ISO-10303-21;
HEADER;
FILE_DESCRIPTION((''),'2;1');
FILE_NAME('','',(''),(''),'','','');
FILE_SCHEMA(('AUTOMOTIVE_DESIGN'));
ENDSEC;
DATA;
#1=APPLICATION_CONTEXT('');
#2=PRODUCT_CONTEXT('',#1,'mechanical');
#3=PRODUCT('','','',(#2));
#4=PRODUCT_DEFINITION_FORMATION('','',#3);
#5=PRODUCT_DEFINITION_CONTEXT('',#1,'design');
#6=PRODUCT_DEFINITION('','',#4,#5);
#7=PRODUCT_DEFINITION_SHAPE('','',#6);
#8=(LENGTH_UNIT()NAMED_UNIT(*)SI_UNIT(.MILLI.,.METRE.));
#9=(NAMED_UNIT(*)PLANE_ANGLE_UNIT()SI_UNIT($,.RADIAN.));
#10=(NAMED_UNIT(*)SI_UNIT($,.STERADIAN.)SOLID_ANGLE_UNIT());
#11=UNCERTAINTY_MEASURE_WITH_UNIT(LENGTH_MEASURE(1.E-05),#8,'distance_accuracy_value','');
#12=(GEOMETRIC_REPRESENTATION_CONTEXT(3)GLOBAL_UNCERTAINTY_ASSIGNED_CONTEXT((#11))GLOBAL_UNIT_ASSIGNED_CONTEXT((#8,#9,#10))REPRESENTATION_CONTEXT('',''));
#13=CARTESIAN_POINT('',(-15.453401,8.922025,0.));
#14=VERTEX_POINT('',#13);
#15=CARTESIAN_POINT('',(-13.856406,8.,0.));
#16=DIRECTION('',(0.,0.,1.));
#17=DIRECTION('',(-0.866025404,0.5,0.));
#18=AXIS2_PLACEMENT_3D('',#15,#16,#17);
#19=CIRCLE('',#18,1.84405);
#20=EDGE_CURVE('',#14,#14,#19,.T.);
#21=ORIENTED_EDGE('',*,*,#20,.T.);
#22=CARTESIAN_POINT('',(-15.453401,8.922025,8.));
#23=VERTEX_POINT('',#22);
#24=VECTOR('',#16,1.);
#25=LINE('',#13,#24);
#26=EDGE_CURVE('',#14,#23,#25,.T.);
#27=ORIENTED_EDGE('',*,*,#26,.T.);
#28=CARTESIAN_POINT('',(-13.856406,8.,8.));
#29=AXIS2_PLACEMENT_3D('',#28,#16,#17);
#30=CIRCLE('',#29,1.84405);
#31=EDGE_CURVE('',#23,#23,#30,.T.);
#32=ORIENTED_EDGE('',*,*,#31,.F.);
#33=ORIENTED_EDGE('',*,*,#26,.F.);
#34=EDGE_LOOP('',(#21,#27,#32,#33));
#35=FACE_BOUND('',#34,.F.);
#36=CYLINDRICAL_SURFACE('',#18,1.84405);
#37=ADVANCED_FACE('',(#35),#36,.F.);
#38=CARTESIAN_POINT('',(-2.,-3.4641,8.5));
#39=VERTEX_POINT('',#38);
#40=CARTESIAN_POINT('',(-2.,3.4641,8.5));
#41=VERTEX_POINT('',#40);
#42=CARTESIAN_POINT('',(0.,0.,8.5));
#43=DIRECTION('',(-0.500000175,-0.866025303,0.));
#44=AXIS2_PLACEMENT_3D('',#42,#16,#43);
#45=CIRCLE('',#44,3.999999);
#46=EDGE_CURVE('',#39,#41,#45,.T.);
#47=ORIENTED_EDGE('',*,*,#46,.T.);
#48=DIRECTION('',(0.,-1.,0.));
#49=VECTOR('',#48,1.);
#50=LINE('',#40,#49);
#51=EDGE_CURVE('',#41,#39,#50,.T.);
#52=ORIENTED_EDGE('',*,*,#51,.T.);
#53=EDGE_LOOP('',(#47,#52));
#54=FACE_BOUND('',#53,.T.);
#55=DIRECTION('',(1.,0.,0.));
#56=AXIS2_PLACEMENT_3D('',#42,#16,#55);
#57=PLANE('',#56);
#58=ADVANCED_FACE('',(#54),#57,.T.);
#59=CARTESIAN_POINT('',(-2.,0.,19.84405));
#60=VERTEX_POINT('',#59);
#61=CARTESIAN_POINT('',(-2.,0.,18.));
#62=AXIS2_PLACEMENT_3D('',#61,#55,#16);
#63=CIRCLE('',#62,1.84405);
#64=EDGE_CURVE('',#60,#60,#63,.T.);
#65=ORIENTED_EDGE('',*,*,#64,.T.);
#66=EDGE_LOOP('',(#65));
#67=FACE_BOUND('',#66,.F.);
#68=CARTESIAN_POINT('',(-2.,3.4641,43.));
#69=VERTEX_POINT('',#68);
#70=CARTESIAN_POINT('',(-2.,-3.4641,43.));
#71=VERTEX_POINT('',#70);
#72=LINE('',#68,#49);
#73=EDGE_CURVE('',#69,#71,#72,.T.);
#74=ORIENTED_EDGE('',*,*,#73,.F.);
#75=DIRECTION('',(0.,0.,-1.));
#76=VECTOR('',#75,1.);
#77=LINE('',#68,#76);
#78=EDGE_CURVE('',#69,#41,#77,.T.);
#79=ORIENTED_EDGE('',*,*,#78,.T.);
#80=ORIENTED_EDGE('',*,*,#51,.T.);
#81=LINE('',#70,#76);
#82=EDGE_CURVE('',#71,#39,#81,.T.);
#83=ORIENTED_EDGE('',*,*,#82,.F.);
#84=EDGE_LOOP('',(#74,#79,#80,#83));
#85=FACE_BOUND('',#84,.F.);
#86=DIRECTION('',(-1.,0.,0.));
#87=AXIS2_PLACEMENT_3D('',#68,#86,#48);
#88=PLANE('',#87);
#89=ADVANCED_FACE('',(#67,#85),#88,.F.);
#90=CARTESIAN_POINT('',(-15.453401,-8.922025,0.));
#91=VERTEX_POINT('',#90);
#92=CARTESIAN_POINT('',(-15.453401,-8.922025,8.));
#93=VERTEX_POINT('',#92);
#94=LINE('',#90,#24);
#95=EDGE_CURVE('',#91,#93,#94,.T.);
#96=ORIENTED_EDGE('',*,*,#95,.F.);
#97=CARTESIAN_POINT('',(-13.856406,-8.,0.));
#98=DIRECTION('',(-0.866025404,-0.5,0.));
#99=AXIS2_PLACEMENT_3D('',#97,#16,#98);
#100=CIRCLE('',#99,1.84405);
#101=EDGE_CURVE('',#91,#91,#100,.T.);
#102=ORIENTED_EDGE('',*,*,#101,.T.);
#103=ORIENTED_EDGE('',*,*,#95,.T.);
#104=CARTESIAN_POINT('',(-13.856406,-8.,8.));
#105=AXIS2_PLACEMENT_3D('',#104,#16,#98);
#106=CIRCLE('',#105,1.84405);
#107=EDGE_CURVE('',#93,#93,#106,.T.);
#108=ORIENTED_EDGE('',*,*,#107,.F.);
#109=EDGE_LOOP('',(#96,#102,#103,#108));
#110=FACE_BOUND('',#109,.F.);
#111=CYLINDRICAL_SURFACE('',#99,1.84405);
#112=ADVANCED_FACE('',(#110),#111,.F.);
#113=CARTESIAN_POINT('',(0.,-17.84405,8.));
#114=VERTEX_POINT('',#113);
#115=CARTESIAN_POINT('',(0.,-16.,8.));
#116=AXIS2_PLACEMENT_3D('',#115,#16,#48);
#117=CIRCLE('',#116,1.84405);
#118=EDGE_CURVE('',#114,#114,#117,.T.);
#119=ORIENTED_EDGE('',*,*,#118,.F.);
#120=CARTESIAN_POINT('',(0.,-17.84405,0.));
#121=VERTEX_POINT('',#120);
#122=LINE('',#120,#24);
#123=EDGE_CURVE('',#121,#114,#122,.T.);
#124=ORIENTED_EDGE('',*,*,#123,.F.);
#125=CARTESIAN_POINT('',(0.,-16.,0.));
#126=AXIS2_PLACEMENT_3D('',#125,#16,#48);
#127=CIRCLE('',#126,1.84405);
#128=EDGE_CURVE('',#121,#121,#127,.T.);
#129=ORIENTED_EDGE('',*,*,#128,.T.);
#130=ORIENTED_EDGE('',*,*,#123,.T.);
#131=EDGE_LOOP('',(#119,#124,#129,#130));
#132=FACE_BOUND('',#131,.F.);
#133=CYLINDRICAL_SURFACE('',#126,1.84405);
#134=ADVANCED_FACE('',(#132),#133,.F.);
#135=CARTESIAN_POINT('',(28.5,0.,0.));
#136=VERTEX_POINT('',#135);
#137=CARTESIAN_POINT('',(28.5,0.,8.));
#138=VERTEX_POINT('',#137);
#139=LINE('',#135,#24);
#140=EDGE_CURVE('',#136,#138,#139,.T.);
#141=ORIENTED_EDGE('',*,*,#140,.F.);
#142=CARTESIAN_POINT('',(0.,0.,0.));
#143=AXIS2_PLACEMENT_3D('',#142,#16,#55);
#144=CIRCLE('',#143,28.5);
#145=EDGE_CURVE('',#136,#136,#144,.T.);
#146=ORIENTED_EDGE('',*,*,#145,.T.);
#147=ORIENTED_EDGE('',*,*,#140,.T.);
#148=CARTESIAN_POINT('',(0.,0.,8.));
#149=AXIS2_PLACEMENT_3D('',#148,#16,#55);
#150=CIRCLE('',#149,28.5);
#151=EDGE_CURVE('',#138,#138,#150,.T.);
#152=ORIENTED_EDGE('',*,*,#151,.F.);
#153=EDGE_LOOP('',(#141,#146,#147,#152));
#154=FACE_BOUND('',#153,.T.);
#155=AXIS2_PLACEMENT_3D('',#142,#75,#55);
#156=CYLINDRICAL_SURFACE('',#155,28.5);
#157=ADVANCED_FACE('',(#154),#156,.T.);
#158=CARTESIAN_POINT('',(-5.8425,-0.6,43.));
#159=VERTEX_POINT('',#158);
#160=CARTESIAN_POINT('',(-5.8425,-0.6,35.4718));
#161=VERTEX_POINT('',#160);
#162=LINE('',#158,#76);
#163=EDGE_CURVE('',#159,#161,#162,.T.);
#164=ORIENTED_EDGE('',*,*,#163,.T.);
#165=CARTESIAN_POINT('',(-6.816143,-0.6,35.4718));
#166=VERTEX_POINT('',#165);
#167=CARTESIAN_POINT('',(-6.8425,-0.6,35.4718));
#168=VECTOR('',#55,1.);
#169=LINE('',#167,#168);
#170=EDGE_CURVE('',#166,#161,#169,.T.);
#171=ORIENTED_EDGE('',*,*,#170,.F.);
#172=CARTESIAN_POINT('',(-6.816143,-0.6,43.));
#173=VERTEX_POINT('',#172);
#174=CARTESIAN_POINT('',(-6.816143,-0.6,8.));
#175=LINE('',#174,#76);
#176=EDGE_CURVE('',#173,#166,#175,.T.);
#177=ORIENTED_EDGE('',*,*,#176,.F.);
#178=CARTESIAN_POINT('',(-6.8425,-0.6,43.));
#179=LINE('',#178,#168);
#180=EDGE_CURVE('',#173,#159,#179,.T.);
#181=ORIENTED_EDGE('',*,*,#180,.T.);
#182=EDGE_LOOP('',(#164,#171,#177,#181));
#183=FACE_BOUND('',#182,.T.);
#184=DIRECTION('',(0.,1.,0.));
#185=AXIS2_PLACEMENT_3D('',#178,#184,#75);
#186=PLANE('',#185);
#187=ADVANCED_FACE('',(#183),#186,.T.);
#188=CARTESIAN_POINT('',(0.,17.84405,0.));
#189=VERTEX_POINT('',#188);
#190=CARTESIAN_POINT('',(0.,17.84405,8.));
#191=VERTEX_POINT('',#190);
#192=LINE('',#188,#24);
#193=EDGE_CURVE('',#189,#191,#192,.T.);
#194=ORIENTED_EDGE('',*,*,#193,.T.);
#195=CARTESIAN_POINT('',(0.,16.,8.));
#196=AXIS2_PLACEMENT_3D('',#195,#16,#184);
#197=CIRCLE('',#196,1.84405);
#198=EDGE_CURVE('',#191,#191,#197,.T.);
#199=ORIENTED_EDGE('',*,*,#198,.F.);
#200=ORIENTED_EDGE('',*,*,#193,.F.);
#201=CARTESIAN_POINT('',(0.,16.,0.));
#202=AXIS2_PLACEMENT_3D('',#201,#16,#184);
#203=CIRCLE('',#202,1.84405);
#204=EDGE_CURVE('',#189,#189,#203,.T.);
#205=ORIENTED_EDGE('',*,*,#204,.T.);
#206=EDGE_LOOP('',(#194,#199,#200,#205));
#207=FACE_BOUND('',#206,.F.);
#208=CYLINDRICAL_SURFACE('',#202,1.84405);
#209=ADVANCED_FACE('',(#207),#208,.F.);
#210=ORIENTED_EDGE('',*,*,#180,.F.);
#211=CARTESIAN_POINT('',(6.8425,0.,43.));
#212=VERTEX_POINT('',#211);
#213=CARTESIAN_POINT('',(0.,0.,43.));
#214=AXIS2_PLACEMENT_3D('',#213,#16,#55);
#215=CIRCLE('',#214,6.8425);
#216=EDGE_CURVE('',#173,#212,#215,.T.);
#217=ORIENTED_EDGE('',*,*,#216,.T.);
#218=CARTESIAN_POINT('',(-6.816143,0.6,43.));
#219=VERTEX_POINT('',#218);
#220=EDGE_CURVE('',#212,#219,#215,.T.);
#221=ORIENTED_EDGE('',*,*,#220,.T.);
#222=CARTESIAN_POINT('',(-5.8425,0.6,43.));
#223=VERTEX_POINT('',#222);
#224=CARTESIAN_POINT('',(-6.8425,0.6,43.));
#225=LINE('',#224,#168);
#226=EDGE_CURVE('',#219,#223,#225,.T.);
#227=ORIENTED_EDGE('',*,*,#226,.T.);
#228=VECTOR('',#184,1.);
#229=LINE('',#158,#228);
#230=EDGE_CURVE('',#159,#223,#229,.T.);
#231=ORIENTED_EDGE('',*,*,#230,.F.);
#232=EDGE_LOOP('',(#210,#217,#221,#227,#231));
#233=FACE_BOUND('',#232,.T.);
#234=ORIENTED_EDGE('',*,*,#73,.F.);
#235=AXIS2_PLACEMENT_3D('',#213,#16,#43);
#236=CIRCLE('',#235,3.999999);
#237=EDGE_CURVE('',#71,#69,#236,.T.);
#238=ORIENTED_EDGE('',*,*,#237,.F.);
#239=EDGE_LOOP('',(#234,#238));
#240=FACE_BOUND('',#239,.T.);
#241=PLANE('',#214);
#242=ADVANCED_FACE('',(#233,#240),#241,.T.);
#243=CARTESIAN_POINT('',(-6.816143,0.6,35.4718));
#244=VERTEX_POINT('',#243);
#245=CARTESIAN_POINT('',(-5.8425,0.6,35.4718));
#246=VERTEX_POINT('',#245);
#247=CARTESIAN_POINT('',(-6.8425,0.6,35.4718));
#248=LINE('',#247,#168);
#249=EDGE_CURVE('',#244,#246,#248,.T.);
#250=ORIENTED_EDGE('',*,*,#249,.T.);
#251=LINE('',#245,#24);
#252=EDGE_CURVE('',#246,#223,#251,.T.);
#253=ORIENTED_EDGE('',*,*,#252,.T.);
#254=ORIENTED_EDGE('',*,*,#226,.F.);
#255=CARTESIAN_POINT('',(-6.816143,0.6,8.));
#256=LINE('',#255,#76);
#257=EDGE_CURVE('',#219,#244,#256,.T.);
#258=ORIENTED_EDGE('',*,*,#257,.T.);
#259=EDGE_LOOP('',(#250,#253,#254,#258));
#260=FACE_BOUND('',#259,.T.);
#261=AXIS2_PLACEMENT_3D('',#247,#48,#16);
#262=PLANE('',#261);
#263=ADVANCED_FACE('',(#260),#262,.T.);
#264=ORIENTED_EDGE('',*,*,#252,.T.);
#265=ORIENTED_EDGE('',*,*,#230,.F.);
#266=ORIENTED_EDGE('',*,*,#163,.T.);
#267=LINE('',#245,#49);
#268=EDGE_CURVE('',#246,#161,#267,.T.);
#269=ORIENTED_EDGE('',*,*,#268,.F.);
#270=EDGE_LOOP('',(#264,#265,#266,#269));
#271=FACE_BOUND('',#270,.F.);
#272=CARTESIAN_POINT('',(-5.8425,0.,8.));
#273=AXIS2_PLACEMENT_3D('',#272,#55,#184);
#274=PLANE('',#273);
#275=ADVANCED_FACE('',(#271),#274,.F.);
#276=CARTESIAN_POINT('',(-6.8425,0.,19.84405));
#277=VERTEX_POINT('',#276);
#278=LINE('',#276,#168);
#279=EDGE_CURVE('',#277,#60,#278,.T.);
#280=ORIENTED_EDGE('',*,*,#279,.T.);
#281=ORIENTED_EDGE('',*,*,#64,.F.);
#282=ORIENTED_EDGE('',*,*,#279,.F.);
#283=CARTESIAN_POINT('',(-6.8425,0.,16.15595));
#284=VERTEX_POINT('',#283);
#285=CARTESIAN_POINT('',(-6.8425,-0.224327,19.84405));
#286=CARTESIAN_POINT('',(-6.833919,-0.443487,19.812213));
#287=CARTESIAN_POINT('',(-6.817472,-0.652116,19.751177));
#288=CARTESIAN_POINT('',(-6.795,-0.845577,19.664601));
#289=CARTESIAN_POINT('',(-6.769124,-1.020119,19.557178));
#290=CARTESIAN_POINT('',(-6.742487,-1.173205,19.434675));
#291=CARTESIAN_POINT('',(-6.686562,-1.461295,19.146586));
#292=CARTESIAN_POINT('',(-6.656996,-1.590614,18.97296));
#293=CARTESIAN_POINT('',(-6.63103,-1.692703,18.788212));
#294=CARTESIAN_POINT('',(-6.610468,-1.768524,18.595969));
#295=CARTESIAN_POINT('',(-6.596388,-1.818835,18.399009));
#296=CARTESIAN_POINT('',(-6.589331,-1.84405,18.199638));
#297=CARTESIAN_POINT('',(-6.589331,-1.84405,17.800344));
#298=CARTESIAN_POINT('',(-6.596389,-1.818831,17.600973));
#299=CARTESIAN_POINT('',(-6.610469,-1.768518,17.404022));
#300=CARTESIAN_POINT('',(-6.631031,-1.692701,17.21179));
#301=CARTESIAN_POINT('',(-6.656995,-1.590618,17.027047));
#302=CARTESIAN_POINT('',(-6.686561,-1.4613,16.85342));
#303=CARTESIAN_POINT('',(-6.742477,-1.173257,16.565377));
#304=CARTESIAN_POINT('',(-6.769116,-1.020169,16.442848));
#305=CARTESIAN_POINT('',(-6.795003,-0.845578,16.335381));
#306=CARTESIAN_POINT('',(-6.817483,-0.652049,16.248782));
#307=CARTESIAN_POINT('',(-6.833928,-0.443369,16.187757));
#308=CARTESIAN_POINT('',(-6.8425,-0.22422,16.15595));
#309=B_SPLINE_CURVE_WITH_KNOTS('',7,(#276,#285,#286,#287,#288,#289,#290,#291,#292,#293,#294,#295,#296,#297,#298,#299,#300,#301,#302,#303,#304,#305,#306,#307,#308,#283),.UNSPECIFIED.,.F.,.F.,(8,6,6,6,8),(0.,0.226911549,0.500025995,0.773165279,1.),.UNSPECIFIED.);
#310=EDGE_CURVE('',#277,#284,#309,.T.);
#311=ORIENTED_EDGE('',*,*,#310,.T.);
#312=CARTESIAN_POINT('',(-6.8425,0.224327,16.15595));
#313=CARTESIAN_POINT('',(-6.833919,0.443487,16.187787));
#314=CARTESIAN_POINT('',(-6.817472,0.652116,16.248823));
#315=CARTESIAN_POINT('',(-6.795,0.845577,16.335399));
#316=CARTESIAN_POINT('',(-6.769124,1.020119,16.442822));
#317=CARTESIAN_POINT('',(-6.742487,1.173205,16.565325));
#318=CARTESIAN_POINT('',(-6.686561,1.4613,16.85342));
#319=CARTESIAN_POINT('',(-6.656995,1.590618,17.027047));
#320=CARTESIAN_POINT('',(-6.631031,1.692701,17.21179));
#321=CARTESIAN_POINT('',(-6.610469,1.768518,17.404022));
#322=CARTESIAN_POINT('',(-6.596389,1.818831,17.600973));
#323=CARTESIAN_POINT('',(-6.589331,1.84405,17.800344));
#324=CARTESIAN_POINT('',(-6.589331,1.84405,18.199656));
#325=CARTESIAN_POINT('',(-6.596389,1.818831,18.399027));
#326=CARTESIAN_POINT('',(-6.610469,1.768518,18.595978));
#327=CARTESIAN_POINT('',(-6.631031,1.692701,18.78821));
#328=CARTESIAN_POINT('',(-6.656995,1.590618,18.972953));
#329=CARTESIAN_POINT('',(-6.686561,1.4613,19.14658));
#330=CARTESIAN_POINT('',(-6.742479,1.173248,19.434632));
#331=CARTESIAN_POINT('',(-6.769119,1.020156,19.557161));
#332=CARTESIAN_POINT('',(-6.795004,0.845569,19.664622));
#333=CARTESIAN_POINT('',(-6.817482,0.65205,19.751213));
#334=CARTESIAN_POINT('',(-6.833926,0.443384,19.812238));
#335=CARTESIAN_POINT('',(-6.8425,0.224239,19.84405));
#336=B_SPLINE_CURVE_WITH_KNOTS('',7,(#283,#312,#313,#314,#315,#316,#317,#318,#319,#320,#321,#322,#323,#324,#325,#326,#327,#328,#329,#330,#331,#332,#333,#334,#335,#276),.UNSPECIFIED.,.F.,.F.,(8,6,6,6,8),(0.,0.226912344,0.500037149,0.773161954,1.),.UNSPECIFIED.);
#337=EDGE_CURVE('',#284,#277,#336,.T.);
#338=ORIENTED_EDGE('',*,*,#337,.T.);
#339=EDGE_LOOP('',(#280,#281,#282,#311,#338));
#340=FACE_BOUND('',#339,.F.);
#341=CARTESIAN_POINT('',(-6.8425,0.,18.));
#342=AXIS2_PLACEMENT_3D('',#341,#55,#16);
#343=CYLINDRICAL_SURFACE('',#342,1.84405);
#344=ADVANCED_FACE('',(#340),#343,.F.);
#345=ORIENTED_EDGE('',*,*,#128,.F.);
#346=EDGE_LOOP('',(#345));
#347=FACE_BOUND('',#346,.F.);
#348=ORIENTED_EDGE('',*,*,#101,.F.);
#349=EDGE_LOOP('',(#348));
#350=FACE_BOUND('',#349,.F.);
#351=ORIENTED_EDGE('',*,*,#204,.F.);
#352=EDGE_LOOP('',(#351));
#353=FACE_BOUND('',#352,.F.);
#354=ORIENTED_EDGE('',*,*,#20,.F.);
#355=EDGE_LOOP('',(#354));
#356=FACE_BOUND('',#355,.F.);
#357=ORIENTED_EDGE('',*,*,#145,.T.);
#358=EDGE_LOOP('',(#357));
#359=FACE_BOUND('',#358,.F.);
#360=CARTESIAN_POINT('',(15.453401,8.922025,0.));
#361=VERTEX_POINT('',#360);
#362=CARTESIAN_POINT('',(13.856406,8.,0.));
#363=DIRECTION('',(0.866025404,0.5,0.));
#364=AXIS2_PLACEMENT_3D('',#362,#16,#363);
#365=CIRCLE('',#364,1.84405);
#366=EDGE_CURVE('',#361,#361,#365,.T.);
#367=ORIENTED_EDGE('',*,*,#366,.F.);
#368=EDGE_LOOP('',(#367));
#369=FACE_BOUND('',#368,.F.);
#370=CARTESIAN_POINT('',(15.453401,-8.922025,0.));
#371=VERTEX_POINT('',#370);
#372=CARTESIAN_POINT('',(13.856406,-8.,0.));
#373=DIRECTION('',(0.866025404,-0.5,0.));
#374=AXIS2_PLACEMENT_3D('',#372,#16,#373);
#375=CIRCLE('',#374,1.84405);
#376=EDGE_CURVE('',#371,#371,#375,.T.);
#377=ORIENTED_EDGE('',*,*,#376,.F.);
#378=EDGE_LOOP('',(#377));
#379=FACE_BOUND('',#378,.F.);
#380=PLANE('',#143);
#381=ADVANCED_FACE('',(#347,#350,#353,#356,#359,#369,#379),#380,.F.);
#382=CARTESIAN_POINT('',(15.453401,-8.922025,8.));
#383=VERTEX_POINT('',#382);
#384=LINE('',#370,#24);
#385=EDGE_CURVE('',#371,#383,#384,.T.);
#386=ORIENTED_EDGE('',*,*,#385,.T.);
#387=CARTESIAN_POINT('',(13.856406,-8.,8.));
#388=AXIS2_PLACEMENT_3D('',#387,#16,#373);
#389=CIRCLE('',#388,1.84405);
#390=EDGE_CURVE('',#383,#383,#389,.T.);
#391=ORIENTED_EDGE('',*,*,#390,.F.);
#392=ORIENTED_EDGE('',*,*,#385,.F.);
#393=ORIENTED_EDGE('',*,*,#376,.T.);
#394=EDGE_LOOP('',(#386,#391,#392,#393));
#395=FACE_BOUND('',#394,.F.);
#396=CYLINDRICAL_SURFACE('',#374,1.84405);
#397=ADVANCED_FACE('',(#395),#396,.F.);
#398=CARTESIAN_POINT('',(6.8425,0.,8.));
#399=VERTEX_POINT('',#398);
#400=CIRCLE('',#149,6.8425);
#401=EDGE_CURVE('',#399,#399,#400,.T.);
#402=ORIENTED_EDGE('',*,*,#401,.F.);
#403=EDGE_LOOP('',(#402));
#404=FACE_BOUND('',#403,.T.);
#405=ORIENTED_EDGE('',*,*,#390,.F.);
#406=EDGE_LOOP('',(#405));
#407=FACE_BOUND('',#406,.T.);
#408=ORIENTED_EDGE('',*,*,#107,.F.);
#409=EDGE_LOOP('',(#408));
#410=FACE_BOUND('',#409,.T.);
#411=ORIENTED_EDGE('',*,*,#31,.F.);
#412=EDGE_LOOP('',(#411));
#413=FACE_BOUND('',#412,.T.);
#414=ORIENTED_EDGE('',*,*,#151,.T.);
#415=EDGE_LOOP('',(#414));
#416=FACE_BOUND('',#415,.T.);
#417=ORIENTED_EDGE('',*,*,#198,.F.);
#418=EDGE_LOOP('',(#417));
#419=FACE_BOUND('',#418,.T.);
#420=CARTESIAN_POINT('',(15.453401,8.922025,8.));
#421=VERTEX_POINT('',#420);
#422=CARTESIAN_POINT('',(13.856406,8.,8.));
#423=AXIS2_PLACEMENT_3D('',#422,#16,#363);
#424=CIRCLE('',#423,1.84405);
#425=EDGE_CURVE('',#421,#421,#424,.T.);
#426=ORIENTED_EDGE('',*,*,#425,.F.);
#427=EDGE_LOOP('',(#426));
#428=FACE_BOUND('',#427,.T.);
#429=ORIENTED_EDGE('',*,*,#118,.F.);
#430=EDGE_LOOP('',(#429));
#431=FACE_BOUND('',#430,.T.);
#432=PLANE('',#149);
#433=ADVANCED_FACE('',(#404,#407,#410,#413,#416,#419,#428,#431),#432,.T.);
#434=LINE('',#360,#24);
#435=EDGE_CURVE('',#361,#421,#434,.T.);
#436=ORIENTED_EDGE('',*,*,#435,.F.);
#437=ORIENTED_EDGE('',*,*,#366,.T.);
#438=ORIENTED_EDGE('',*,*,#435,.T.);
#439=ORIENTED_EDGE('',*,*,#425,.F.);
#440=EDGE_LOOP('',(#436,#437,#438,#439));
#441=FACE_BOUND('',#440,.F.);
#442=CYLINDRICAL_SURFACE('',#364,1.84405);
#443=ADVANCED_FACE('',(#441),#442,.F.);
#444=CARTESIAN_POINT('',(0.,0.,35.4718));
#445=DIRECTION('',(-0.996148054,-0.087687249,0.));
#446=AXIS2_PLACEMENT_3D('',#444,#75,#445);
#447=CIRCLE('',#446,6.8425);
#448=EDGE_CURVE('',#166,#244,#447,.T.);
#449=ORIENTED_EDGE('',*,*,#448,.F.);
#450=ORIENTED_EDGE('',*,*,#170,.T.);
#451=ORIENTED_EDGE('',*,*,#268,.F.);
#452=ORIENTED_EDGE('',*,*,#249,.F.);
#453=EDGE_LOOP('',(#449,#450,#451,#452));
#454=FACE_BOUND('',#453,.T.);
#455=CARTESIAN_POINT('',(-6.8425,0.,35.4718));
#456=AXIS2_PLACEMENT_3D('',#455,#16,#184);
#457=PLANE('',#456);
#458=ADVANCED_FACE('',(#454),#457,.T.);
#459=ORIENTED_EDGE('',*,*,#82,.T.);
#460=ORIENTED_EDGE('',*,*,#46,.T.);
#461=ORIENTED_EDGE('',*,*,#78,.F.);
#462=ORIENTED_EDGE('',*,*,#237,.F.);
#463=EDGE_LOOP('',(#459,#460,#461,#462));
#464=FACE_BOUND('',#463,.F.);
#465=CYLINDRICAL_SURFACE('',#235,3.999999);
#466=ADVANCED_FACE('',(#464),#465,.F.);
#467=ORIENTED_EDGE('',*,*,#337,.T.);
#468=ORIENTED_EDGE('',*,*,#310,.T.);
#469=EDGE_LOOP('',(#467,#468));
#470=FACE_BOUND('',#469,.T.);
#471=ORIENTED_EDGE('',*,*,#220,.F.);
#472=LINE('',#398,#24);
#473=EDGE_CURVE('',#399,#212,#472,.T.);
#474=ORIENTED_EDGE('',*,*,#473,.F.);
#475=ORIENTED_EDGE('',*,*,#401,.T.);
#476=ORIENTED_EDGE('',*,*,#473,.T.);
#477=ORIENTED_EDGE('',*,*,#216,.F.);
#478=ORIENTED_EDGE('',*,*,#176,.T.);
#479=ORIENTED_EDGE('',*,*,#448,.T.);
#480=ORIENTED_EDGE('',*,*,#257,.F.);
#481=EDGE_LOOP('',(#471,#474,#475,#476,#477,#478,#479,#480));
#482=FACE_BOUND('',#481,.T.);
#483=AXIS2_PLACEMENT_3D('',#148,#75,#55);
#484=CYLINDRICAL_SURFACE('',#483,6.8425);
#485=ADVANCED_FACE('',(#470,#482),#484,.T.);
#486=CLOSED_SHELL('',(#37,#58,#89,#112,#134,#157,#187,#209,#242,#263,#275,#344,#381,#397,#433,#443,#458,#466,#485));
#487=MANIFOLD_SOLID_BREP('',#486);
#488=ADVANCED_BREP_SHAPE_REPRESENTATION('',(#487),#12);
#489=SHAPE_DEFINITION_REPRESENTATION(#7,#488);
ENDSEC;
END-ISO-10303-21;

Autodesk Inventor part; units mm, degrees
sketch "Boceto1" plane through (0, 0, 0) normal (0, 0, 1) x (1, 0, 0)
  circle A0 centre (0, 0) radius 28.5
  dimension "DiametroJunta" = 57
extrude "Extrusión1" add sketch "Boceto1" along normal blind 8
sketch "Boceto2" plane through (0, 0, 8) normal (0, 0, 1) x (1, 0, 0)
  circle A0 centre (0, 0) radius 6.8425
  dimension "DiametroEje" = 13.685
extrude "Extrusión2" add sketch "Boceto2" along normal blind 35
sketch "Boceto3" plane through (0, 0, 43) normal (0, 0, 1) x (1, 0, 0)
  arc A0 (-2, -3.4641) -> (-2, 3.4641) centre (0, 0) ccw
  line L0 (-2, 3.4641) -> (-2, -3.4641)
  circle A1 centre (0, 0) radius 6.8425 projected
  point P0 (2, -3.4641)
  point P1 (2, 3.4641)
  dimension "DiametroEntrada" = 8
  dimension "d21" = 2
extrude "Extrusión3" cut sketch "Boceto3" against normal blind 34.5 contours L0 A0
ref_plane "Plano de trabajo1" through (6.8425, 0, 8) normal (1, 0, 0) x (0, 1, 0)
ref_plane "Plano de trabajo2" through (-6.8425, 0, 8) normal (1, 0, 0) x (0, 1, 0)
sketch "Boceto5" plane through (-6.8425, 0, 8) normal (1, 0, 0) x (0, 1, 0)
  line L0 (6.8425, 35) -> (-6.8425, 35) projected
  line L1 (0, 35) -> (0, 10)
  circle A0 centre (0, 10) radius 1.4978
  line L2 (-0.6, 27.4718) -> (0.6, 27.4718)
  line L3 (0.6, 27.4718) -> (0.6, 35)
  line L4 (0.6, 35) -> (-0.6, 35)
  line L5 (-0.6, 35) -> (-0.6, 27.4718)
  line L6 (-0.6, 27.4718) -> (0.6, 35) construction
  line L7 (0.6, 27.4718) -> (-0.6, 35) construction
  point P0 (0, -8)
  point P1 (0, 31.2359)
  dimension "d54" = 25
  dimension "d91" = 1.2
hole "Agujero2" at (-6.8425, 0, 18) direction (1, 0, 0) diameter 3.6881 depth 6 tip angle 118 thread size "M4.5x0.75" class "6H" standard "ISO Metric profile"
sketch "Boceto7" plane through (0, 0, 0) normal (0, 0, -1) x (-1, 0, 0)
  arc A0 (2, 3.4641) -> (2, -3.4641) centre (0, 0) ccw projected
  circle A1 centre (0, 16) radius 5
  dimension "d35" = 10
  dimension "d49" = 16
ref_plane "Plano de trabajo3" through (0, 22.5, 15) normal (0, 0, -1) x (-1, 0, 0)
ref_plane "Plano de trabajo4" through (0, 11, 8) normal (0, 0, -1) x (-1, 0, 0)
sketch "Boceto9" plane through (0, 11, 8) normal (0, 0, -1) x (-1, 0, 0)
  circle A0 centre (0, 0) radius 2.5
  point P0 (0, -11)
  dimension "d70" = 5
hole "Agujero6" at (0, 16, 0) direction (0, 0, 1) diameter 3.6881 depth 13 thread size "M4.5x0.75" class "6H" standard "ISO Metric profile"
pattern_circular "Patrón circular6" count 6 over 360 about axis through (0, 0, 8) along (0, 0, 1) of "Agujero6"
extrude "Extrusión6" add sketch "Boceto5" along normal blind 1 contours L3 L2 L1 L0 | L1 L2 L5 L0
extrude "Extrusión7" cut sketch "Boceto5" along normal blind 1 contours L3 L2 L1 L0 | L1 L2 L5 L0
equation "\"d21\" = 0.25 * DiametroEntrada"
properties part number "E_01" material "PETG"
